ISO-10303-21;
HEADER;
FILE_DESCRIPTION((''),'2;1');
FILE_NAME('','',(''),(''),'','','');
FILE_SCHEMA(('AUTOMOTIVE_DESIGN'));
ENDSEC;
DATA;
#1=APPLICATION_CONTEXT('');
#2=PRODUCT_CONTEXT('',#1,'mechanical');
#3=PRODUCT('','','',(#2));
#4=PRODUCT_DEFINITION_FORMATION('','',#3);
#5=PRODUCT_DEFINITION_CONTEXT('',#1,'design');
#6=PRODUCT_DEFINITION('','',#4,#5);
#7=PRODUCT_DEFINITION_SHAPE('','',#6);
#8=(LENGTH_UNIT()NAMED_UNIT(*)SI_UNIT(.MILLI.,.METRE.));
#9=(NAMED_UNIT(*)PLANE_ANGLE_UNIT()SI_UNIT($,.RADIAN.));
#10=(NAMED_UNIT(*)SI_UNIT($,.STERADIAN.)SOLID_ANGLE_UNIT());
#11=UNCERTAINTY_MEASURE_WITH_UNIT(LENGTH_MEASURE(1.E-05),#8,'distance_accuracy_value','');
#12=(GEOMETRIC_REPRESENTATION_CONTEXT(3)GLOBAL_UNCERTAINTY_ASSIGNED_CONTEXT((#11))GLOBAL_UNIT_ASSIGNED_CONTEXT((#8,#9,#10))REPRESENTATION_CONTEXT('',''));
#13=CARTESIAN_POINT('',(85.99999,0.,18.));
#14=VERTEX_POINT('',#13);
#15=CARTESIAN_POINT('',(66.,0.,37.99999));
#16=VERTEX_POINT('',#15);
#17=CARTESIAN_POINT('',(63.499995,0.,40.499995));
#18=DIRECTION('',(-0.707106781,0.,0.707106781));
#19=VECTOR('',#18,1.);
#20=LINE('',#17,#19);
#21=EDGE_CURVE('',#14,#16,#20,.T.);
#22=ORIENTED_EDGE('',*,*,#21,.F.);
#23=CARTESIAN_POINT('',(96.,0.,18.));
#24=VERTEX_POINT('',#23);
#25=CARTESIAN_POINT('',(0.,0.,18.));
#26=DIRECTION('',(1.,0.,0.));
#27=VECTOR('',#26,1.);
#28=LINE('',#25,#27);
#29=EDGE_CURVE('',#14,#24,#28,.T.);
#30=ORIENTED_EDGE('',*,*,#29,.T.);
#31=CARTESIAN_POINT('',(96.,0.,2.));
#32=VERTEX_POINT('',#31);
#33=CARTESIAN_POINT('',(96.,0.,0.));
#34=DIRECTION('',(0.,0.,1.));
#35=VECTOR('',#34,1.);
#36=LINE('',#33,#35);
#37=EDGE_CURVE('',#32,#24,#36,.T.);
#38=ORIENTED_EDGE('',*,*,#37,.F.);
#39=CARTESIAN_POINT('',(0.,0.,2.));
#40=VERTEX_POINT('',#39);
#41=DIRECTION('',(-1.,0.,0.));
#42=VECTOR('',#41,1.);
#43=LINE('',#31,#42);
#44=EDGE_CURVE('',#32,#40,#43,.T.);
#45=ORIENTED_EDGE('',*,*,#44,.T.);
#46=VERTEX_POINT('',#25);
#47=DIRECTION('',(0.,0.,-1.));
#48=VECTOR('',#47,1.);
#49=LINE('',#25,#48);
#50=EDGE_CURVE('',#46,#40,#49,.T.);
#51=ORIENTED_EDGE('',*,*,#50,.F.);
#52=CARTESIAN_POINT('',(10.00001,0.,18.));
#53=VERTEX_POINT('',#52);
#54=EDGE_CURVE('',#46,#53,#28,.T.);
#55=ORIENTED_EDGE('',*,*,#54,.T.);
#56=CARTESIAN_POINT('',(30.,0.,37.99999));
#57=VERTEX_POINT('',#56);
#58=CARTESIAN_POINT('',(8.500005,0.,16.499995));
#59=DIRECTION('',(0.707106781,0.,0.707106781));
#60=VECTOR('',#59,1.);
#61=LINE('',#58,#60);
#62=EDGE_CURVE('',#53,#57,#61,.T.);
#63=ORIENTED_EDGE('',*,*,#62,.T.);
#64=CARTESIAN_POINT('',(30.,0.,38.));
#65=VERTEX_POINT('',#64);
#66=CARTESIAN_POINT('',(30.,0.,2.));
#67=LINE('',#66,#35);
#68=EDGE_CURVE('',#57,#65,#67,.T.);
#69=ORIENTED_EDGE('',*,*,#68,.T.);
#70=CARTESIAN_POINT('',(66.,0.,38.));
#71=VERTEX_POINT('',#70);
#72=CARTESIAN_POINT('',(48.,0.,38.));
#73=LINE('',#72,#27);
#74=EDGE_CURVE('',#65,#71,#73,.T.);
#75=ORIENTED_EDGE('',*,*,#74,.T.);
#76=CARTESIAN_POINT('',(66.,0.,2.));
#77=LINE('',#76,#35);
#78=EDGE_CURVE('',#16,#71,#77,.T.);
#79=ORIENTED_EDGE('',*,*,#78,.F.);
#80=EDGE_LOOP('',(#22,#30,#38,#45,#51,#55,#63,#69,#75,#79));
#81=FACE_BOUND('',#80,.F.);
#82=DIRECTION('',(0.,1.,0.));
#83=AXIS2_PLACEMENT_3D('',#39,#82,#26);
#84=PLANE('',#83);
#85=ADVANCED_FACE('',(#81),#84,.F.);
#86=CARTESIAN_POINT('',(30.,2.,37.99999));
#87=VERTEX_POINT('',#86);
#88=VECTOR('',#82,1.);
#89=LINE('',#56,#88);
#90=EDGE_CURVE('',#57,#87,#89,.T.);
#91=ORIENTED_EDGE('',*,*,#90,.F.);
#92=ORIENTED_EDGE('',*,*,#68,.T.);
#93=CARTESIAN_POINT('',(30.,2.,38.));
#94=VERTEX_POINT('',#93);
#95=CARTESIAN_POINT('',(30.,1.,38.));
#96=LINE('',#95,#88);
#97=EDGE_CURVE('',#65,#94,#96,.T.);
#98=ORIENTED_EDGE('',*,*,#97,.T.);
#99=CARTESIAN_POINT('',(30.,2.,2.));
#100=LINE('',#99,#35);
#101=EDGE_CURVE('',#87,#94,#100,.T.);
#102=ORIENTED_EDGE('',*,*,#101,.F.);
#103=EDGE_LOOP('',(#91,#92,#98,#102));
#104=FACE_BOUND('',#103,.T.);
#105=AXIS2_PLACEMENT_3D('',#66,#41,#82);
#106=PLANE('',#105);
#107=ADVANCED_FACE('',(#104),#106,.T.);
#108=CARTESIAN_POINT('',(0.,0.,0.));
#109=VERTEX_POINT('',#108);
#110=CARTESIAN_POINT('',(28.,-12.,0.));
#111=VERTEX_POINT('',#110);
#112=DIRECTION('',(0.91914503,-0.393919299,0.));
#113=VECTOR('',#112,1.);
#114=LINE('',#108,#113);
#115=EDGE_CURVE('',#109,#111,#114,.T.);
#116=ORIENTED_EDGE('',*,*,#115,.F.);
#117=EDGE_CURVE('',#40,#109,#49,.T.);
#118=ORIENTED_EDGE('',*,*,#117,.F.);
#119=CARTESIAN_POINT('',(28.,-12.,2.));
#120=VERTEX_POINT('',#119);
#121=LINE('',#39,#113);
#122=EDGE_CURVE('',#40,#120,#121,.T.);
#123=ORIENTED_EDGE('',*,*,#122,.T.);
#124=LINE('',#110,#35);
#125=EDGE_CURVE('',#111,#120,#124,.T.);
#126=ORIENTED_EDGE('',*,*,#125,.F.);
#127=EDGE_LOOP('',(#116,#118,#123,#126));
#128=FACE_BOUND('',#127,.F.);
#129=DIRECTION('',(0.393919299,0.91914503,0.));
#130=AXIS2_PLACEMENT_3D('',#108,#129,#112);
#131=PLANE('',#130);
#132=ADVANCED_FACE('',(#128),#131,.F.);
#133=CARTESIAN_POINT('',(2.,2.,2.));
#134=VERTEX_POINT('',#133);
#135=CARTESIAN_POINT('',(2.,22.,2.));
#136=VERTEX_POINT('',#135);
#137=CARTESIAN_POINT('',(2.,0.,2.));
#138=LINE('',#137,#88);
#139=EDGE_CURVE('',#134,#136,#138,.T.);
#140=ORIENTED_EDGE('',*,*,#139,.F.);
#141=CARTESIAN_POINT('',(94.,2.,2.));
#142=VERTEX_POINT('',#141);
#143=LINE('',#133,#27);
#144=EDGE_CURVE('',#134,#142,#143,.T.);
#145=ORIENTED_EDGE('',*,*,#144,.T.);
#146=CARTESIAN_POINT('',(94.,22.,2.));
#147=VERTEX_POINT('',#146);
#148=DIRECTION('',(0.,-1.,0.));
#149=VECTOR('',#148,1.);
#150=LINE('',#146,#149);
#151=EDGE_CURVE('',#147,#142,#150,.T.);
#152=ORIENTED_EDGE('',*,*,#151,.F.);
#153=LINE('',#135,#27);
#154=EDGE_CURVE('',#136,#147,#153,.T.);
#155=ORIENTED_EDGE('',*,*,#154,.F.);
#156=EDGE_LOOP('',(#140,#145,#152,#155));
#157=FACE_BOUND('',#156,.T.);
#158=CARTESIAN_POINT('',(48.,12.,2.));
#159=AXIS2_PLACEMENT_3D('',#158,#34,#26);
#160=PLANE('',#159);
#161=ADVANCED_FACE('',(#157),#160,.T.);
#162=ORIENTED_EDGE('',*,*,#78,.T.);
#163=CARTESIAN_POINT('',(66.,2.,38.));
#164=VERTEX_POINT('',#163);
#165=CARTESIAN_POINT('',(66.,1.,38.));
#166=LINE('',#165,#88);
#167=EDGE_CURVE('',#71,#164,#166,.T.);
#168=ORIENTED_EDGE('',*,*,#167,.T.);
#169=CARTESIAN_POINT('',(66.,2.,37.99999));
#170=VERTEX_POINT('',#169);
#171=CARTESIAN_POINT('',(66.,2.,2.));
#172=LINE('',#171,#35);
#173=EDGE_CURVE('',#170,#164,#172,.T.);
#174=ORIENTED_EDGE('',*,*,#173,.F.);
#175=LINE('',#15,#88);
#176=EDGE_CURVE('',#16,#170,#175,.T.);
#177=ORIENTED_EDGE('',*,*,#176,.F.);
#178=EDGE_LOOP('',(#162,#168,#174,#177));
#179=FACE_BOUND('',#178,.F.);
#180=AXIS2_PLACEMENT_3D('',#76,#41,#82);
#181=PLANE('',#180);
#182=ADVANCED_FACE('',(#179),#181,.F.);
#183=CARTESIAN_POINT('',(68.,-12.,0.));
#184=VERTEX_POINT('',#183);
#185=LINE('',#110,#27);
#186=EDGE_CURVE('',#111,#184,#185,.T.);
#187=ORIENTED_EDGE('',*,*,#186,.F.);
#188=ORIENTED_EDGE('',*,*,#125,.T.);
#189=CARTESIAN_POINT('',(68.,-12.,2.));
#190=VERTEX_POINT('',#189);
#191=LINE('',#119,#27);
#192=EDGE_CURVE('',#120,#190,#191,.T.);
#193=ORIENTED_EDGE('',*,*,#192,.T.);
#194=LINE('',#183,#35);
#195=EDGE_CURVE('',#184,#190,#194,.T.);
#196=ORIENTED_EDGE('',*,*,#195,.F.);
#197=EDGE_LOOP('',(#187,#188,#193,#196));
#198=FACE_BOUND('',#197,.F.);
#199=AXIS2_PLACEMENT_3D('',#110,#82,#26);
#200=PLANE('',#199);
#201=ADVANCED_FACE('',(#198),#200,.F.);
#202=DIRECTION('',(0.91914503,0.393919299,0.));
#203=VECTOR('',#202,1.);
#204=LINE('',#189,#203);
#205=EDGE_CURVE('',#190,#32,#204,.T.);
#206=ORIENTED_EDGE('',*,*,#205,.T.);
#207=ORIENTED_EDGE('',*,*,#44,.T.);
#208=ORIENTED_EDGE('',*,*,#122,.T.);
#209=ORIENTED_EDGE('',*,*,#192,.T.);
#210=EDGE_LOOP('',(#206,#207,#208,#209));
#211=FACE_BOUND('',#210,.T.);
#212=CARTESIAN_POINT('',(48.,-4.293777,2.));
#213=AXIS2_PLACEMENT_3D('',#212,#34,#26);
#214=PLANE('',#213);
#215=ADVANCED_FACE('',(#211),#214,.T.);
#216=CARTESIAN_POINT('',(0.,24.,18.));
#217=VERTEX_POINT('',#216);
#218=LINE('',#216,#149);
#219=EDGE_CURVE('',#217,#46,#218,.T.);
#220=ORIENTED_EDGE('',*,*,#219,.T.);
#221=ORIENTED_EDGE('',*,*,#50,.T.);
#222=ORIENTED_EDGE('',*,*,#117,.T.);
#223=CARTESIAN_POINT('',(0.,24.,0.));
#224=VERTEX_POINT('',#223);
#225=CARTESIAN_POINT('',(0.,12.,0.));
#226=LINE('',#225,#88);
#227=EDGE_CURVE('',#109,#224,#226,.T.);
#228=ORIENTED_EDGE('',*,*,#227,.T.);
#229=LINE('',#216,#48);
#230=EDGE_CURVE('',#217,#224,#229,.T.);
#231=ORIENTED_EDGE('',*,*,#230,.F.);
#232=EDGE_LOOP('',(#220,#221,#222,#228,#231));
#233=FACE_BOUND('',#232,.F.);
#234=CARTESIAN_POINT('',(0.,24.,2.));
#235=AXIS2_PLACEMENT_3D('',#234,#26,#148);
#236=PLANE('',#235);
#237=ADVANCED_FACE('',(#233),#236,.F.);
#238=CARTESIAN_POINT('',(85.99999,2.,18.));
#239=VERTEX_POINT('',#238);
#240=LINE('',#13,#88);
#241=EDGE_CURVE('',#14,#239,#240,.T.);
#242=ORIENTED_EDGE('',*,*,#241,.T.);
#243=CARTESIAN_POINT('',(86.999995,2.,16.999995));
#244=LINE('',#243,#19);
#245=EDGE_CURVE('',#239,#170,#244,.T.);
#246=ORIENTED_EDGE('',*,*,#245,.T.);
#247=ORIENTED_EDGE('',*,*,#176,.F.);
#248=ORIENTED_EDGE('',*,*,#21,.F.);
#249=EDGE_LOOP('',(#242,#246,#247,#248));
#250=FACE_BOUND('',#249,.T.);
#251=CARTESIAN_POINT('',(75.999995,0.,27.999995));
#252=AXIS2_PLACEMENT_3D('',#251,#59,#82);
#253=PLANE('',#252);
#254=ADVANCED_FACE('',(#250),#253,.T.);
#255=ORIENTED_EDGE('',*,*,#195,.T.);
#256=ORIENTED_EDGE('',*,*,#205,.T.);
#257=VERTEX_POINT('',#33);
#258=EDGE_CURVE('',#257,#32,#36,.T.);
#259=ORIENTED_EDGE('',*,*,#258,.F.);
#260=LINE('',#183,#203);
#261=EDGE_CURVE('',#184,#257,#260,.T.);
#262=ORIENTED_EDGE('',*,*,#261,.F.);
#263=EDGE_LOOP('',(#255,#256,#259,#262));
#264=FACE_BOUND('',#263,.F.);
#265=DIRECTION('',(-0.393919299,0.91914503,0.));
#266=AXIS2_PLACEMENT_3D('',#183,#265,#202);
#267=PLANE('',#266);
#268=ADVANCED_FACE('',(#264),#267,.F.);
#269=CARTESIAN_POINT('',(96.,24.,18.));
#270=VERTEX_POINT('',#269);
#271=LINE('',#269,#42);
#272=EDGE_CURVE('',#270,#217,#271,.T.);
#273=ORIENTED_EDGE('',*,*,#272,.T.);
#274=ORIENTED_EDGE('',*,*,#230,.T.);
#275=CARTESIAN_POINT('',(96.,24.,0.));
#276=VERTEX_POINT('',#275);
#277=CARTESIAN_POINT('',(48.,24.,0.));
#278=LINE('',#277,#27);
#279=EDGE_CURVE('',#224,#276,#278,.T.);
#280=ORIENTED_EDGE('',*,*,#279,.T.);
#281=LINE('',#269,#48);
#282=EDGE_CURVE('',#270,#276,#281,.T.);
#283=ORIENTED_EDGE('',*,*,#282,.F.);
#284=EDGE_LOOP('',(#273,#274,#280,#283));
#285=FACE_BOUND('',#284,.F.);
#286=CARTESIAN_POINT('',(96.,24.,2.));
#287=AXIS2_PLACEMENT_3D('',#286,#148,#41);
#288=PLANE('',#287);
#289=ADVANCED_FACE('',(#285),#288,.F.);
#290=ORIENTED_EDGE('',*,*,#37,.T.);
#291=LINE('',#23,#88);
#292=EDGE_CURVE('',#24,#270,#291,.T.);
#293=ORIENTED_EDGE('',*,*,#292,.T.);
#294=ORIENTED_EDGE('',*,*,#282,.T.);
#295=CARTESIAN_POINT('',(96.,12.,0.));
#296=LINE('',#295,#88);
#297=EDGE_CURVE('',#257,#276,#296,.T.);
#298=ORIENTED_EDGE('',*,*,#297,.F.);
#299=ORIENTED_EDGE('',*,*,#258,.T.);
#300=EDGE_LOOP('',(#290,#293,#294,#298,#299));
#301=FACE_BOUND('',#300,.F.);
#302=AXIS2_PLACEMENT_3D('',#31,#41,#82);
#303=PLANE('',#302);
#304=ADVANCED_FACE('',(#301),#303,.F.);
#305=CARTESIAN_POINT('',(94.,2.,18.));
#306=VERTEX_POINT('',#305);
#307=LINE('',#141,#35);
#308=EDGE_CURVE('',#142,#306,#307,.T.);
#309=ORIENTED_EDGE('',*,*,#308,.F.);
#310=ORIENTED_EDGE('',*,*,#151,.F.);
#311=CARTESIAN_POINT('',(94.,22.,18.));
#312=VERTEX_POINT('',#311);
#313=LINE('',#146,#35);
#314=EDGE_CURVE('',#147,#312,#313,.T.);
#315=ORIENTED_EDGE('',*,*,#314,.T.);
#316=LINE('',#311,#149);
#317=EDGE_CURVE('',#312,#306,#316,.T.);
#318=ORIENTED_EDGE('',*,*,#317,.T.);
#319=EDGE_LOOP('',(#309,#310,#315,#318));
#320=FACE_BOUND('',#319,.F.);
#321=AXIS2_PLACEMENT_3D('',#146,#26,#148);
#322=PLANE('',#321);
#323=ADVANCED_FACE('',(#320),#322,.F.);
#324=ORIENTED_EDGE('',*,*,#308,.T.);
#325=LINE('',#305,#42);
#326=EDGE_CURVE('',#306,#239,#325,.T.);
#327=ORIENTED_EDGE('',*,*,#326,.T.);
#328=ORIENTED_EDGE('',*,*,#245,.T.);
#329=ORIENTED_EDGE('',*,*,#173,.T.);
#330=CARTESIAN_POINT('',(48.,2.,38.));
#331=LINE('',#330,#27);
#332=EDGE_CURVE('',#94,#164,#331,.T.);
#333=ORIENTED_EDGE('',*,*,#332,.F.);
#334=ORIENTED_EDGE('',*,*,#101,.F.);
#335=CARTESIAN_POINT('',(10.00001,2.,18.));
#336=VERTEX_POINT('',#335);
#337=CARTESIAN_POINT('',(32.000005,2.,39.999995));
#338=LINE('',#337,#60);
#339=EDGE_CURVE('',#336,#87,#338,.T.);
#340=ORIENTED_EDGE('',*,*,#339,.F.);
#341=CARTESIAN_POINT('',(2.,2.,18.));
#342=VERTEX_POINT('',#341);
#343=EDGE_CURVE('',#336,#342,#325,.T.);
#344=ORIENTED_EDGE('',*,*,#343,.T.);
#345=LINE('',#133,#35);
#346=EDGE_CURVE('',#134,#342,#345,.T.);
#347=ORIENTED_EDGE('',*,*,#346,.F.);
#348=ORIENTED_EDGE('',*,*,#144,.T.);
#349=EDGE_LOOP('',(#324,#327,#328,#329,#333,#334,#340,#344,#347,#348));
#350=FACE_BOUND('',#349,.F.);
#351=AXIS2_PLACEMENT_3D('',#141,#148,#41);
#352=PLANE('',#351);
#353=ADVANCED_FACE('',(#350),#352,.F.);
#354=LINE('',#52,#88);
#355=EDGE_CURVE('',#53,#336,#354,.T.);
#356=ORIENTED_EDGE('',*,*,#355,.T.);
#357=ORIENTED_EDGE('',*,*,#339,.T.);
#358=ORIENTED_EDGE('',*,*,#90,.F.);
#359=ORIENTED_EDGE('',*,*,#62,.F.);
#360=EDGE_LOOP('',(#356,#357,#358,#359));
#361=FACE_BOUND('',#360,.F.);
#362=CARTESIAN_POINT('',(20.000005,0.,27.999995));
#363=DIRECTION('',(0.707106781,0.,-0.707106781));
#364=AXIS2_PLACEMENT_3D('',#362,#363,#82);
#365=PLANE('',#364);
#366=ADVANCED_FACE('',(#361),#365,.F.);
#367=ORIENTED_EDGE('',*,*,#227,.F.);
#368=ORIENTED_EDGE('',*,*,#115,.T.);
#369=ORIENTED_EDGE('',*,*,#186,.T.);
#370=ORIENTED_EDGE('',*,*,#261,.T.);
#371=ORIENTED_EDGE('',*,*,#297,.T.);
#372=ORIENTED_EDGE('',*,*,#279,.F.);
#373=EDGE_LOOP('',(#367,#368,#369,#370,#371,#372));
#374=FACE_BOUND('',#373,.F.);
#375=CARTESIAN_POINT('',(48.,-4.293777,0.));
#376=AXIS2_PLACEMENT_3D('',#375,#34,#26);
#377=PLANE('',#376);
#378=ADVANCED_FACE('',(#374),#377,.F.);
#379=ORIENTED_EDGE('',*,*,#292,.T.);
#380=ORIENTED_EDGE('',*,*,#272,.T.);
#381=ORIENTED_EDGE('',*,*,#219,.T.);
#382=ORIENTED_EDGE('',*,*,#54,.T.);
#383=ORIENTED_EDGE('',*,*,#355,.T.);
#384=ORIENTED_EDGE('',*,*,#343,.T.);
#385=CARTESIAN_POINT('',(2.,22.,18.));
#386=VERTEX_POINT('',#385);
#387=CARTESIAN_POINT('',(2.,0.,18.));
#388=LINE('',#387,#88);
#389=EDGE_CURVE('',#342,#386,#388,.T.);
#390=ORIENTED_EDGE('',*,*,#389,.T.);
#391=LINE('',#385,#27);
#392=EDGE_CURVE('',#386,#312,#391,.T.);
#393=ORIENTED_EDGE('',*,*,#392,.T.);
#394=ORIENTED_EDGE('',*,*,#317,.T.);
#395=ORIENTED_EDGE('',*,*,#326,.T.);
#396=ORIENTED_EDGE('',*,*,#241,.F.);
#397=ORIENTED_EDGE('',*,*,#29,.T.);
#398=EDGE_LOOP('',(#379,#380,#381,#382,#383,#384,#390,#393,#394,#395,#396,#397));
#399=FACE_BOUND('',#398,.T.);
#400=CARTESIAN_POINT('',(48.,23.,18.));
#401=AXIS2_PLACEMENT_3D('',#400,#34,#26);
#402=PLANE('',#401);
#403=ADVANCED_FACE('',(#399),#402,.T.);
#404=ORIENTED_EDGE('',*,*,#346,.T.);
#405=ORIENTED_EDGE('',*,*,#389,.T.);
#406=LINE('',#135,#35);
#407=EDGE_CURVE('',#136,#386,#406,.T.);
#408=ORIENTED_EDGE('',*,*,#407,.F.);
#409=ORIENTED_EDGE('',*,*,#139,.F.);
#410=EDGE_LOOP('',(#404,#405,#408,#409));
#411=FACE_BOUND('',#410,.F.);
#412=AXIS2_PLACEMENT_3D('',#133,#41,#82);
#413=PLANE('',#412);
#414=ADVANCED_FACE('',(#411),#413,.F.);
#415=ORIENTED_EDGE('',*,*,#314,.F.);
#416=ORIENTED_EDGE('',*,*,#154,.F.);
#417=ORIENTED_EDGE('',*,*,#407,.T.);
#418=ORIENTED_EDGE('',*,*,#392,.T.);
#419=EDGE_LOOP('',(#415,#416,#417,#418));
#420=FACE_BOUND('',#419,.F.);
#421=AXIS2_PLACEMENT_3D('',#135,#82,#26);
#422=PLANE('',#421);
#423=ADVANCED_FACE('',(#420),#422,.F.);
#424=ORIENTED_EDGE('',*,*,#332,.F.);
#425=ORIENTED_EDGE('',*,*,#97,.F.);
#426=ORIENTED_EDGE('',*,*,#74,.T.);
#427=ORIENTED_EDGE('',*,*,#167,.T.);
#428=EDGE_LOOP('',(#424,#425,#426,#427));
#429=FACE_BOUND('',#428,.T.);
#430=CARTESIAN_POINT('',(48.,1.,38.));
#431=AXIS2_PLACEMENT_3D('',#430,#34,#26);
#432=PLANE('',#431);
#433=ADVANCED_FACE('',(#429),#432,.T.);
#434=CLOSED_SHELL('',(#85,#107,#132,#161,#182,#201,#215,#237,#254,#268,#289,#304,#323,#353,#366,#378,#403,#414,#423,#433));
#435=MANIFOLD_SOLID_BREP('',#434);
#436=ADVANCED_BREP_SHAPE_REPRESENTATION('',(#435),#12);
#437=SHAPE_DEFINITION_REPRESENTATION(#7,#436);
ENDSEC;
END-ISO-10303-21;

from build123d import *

# Parameters (mm, degrees)
F0_W     = 96
F0_H     = 24
F1_DEPTH = 2
F2_W     = 36
F2_H     = 2
F3_DEPTH = 36
F2_W_2   = 92
F2_W_3   = 2
F2_H_2   = 20
F2_W_4   = 28
F4_DEPTH = 16
F5_SIZE  = 19.99999
F6_DEPTH = 2


# Not quite as in the source:
# - a fillet or chamfer is up to 0.001 mm smaller than in the source, because OpenCascade refuses the exact size


with BuildPart() as f1:
    # F0 (on Top) → F1 (new body)
    with BuildSketch(Plane.XY):
        with Locations((48, 12)):
            Rectangle(F0_W, F0_H)
    extrude(amount=F1_DEPTH)

    # F2 (on face) → F3 (join)
    with BuildSketch(Plane.XY.offset(2)):
        with Locations((48, 1)):
            Rectangle(F2_W, F2_H)
    extrude(amount=F3_DEPTH)

    # F2 (on face) → F4 (join)
    with BuildSketch(Plane.XY.offset(2)):
        with Locations((48, 23)):
            Rectangle(F2_W_2, F2_H)
        with Locations((95, 23)):
            Rectangle(F2_W_3, F2_H)
        with Locations((48, 1)):
            Rectangle(F2_W, F2_H)
        with Locations((95, 12)):
            Rectangle(F2_W_3, F2_H_2)
        with Locations((95, 1)):
            Rectangle(F2_W_3, F2_H)
        Polygon((2, 22), (2, 24), (0, 24), (0, 2), (2, 2), align=None)
        with Locations((1, 1)):
            Rectangle(F2_W_3, F2_H)
        with Locations((16, 1)):
            Rectangle(F2_W_4, F2_H)
        with Locations((80, 1)):
            Rectangle(F2_W_4, F2_H)
    extrude(amount=F4_DEPTH)

    # F5 (size 20 in the source; OpenCascade refuses exactly that, so slightly less here)
    f5_edges = [f1.edges().sort_by_distance(p)[0] for p in [
        (30, 1, 18),
        (66, 1, 18),
    ]]
    chamfer(f5_edges, length=F5_SIZE)

    # F0 (on Top) → F6 (join, through all)
    with BuildSketch(Plane.XY):
        Polygon((96, 0), (0, 0), (28, -12), (68, -12), align=None)
    extrude(amount=F6_DEPTH)


solid = f1.part
